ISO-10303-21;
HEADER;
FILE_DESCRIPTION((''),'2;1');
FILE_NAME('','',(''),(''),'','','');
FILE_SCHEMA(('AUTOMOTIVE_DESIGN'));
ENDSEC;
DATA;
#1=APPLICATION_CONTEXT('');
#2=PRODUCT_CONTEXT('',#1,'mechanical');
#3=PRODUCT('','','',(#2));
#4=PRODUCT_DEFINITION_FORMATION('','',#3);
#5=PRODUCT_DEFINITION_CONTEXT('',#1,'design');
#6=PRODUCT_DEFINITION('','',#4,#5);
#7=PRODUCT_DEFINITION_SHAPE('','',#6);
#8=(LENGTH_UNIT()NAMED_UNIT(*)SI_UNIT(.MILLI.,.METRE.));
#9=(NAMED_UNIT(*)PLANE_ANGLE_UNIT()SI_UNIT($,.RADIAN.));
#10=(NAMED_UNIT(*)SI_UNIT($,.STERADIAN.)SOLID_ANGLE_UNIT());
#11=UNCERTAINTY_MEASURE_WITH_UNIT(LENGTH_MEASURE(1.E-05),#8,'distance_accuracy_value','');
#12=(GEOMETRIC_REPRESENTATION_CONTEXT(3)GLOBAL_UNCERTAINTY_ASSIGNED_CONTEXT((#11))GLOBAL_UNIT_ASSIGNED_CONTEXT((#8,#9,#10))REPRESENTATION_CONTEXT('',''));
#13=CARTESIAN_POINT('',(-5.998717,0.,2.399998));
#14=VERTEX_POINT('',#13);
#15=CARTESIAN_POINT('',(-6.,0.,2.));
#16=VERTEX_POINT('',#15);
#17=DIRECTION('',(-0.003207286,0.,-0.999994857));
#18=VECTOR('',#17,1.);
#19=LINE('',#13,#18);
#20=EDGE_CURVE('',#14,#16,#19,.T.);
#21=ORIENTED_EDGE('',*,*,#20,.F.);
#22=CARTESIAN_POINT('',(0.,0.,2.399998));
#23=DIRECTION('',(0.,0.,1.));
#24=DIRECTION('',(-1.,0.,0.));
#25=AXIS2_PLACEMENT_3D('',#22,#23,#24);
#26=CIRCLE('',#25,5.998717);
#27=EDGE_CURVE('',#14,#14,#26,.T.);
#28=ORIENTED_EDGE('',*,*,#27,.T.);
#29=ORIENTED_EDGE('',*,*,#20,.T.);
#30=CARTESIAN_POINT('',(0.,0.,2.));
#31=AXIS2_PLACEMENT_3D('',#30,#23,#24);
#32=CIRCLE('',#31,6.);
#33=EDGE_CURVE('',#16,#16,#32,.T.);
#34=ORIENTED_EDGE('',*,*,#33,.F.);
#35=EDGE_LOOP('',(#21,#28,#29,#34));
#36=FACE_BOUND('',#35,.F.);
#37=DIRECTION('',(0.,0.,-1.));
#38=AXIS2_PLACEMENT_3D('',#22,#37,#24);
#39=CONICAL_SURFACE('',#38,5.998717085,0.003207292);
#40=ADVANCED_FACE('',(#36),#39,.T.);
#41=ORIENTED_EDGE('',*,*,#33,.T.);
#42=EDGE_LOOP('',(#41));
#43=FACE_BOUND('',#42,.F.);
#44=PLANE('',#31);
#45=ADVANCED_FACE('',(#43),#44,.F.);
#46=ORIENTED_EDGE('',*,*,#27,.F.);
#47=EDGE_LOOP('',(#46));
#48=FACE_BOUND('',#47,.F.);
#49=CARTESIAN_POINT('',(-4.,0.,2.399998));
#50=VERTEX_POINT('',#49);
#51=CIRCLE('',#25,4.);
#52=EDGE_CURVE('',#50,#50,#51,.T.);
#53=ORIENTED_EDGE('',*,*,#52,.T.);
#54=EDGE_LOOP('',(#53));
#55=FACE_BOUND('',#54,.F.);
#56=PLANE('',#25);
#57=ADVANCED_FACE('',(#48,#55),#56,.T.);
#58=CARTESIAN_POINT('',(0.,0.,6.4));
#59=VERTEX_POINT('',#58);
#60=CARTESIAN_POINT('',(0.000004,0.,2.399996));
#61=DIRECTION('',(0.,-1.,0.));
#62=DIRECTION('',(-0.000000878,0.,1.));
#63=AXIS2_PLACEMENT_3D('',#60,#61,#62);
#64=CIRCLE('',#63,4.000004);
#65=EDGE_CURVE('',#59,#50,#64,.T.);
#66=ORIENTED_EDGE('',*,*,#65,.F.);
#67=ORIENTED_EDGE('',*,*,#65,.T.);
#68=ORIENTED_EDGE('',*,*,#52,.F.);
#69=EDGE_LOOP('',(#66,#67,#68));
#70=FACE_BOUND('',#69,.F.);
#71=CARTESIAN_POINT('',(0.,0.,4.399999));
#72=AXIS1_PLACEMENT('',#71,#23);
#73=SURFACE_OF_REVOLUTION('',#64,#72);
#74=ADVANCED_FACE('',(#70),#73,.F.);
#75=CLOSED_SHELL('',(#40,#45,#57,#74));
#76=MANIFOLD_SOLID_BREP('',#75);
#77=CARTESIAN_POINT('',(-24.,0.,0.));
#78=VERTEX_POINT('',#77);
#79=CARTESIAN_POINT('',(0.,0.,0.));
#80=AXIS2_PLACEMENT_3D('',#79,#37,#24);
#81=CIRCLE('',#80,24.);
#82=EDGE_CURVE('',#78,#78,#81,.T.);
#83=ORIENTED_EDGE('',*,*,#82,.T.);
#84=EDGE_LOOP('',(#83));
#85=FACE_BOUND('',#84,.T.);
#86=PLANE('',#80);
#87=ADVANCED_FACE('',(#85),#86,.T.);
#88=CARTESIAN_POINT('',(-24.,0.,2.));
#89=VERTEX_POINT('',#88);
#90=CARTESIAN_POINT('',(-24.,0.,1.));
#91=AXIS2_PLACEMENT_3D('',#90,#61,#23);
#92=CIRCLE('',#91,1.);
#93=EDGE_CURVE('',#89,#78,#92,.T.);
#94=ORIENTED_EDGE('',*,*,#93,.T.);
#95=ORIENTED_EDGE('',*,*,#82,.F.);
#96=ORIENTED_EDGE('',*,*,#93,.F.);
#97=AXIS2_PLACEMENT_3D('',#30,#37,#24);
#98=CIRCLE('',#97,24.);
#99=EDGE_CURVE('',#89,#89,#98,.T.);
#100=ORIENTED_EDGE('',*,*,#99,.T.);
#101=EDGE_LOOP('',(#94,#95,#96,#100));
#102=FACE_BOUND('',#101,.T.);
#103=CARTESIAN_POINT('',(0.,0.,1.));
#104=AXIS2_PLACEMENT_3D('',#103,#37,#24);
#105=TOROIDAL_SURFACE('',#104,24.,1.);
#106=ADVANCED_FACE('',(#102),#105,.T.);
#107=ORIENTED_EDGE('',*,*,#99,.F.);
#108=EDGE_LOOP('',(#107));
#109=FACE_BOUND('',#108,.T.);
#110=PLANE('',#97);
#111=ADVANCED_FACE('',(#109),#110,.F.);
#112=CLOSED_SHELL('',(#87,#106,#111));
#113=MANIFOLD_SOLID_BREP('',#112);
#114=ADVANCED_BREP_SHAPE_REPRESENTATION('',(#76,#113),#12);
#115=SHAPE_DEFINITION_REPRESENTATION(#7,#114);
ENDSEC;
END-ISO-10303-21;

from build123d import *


# Not quite as in the source:
# - ends of sketch curves that miss each other by under 0.0002 mm in the source are joined
# - a feature names something its author has since deleted; it is built from what else it names


with BuildPart() as f1:
    # F0 (on Front) → F1 (revolve)
    with BuildSketch(Plane.XZ):
        with BuildLine():
            Line((0, 2), (-24, 2))
            ThreePointArc((-24, 2), (-25, 1), (-24, 0))
            Line((-24, 0), (0, 0))
            Line((0, 0), (0, 2))
        make_face()
    revolve(axis=Axis((0, 0, 1), (0, 0, -1)))


with BuildPart() as f3:
    # F2 (on Front) → F3 (revolve)
    with BuildSketch(Plane.XZ):
        with BuildLine():
            Line((0, 2.3999979427), (0, 6.4))
            ThreePointArc((0, 6.4), (-2.8284271247, 5.2284250674), (-4, 2.3999979427))
            Line((-4, 2.3999979427), (-5.9987170854, 2.3999979427))
            Line((-5.9987170854, 2.3999979427), (-6, 2))
            Line((-6, 2), (0, 2))
            Line((0, 2), (0, 2.3999979427))
        make_face()
    revolve(axis=Axis((0, 0, 4.3999989713), (0, 0, 1)))


solid = Compound([f1.part, f3.part])
